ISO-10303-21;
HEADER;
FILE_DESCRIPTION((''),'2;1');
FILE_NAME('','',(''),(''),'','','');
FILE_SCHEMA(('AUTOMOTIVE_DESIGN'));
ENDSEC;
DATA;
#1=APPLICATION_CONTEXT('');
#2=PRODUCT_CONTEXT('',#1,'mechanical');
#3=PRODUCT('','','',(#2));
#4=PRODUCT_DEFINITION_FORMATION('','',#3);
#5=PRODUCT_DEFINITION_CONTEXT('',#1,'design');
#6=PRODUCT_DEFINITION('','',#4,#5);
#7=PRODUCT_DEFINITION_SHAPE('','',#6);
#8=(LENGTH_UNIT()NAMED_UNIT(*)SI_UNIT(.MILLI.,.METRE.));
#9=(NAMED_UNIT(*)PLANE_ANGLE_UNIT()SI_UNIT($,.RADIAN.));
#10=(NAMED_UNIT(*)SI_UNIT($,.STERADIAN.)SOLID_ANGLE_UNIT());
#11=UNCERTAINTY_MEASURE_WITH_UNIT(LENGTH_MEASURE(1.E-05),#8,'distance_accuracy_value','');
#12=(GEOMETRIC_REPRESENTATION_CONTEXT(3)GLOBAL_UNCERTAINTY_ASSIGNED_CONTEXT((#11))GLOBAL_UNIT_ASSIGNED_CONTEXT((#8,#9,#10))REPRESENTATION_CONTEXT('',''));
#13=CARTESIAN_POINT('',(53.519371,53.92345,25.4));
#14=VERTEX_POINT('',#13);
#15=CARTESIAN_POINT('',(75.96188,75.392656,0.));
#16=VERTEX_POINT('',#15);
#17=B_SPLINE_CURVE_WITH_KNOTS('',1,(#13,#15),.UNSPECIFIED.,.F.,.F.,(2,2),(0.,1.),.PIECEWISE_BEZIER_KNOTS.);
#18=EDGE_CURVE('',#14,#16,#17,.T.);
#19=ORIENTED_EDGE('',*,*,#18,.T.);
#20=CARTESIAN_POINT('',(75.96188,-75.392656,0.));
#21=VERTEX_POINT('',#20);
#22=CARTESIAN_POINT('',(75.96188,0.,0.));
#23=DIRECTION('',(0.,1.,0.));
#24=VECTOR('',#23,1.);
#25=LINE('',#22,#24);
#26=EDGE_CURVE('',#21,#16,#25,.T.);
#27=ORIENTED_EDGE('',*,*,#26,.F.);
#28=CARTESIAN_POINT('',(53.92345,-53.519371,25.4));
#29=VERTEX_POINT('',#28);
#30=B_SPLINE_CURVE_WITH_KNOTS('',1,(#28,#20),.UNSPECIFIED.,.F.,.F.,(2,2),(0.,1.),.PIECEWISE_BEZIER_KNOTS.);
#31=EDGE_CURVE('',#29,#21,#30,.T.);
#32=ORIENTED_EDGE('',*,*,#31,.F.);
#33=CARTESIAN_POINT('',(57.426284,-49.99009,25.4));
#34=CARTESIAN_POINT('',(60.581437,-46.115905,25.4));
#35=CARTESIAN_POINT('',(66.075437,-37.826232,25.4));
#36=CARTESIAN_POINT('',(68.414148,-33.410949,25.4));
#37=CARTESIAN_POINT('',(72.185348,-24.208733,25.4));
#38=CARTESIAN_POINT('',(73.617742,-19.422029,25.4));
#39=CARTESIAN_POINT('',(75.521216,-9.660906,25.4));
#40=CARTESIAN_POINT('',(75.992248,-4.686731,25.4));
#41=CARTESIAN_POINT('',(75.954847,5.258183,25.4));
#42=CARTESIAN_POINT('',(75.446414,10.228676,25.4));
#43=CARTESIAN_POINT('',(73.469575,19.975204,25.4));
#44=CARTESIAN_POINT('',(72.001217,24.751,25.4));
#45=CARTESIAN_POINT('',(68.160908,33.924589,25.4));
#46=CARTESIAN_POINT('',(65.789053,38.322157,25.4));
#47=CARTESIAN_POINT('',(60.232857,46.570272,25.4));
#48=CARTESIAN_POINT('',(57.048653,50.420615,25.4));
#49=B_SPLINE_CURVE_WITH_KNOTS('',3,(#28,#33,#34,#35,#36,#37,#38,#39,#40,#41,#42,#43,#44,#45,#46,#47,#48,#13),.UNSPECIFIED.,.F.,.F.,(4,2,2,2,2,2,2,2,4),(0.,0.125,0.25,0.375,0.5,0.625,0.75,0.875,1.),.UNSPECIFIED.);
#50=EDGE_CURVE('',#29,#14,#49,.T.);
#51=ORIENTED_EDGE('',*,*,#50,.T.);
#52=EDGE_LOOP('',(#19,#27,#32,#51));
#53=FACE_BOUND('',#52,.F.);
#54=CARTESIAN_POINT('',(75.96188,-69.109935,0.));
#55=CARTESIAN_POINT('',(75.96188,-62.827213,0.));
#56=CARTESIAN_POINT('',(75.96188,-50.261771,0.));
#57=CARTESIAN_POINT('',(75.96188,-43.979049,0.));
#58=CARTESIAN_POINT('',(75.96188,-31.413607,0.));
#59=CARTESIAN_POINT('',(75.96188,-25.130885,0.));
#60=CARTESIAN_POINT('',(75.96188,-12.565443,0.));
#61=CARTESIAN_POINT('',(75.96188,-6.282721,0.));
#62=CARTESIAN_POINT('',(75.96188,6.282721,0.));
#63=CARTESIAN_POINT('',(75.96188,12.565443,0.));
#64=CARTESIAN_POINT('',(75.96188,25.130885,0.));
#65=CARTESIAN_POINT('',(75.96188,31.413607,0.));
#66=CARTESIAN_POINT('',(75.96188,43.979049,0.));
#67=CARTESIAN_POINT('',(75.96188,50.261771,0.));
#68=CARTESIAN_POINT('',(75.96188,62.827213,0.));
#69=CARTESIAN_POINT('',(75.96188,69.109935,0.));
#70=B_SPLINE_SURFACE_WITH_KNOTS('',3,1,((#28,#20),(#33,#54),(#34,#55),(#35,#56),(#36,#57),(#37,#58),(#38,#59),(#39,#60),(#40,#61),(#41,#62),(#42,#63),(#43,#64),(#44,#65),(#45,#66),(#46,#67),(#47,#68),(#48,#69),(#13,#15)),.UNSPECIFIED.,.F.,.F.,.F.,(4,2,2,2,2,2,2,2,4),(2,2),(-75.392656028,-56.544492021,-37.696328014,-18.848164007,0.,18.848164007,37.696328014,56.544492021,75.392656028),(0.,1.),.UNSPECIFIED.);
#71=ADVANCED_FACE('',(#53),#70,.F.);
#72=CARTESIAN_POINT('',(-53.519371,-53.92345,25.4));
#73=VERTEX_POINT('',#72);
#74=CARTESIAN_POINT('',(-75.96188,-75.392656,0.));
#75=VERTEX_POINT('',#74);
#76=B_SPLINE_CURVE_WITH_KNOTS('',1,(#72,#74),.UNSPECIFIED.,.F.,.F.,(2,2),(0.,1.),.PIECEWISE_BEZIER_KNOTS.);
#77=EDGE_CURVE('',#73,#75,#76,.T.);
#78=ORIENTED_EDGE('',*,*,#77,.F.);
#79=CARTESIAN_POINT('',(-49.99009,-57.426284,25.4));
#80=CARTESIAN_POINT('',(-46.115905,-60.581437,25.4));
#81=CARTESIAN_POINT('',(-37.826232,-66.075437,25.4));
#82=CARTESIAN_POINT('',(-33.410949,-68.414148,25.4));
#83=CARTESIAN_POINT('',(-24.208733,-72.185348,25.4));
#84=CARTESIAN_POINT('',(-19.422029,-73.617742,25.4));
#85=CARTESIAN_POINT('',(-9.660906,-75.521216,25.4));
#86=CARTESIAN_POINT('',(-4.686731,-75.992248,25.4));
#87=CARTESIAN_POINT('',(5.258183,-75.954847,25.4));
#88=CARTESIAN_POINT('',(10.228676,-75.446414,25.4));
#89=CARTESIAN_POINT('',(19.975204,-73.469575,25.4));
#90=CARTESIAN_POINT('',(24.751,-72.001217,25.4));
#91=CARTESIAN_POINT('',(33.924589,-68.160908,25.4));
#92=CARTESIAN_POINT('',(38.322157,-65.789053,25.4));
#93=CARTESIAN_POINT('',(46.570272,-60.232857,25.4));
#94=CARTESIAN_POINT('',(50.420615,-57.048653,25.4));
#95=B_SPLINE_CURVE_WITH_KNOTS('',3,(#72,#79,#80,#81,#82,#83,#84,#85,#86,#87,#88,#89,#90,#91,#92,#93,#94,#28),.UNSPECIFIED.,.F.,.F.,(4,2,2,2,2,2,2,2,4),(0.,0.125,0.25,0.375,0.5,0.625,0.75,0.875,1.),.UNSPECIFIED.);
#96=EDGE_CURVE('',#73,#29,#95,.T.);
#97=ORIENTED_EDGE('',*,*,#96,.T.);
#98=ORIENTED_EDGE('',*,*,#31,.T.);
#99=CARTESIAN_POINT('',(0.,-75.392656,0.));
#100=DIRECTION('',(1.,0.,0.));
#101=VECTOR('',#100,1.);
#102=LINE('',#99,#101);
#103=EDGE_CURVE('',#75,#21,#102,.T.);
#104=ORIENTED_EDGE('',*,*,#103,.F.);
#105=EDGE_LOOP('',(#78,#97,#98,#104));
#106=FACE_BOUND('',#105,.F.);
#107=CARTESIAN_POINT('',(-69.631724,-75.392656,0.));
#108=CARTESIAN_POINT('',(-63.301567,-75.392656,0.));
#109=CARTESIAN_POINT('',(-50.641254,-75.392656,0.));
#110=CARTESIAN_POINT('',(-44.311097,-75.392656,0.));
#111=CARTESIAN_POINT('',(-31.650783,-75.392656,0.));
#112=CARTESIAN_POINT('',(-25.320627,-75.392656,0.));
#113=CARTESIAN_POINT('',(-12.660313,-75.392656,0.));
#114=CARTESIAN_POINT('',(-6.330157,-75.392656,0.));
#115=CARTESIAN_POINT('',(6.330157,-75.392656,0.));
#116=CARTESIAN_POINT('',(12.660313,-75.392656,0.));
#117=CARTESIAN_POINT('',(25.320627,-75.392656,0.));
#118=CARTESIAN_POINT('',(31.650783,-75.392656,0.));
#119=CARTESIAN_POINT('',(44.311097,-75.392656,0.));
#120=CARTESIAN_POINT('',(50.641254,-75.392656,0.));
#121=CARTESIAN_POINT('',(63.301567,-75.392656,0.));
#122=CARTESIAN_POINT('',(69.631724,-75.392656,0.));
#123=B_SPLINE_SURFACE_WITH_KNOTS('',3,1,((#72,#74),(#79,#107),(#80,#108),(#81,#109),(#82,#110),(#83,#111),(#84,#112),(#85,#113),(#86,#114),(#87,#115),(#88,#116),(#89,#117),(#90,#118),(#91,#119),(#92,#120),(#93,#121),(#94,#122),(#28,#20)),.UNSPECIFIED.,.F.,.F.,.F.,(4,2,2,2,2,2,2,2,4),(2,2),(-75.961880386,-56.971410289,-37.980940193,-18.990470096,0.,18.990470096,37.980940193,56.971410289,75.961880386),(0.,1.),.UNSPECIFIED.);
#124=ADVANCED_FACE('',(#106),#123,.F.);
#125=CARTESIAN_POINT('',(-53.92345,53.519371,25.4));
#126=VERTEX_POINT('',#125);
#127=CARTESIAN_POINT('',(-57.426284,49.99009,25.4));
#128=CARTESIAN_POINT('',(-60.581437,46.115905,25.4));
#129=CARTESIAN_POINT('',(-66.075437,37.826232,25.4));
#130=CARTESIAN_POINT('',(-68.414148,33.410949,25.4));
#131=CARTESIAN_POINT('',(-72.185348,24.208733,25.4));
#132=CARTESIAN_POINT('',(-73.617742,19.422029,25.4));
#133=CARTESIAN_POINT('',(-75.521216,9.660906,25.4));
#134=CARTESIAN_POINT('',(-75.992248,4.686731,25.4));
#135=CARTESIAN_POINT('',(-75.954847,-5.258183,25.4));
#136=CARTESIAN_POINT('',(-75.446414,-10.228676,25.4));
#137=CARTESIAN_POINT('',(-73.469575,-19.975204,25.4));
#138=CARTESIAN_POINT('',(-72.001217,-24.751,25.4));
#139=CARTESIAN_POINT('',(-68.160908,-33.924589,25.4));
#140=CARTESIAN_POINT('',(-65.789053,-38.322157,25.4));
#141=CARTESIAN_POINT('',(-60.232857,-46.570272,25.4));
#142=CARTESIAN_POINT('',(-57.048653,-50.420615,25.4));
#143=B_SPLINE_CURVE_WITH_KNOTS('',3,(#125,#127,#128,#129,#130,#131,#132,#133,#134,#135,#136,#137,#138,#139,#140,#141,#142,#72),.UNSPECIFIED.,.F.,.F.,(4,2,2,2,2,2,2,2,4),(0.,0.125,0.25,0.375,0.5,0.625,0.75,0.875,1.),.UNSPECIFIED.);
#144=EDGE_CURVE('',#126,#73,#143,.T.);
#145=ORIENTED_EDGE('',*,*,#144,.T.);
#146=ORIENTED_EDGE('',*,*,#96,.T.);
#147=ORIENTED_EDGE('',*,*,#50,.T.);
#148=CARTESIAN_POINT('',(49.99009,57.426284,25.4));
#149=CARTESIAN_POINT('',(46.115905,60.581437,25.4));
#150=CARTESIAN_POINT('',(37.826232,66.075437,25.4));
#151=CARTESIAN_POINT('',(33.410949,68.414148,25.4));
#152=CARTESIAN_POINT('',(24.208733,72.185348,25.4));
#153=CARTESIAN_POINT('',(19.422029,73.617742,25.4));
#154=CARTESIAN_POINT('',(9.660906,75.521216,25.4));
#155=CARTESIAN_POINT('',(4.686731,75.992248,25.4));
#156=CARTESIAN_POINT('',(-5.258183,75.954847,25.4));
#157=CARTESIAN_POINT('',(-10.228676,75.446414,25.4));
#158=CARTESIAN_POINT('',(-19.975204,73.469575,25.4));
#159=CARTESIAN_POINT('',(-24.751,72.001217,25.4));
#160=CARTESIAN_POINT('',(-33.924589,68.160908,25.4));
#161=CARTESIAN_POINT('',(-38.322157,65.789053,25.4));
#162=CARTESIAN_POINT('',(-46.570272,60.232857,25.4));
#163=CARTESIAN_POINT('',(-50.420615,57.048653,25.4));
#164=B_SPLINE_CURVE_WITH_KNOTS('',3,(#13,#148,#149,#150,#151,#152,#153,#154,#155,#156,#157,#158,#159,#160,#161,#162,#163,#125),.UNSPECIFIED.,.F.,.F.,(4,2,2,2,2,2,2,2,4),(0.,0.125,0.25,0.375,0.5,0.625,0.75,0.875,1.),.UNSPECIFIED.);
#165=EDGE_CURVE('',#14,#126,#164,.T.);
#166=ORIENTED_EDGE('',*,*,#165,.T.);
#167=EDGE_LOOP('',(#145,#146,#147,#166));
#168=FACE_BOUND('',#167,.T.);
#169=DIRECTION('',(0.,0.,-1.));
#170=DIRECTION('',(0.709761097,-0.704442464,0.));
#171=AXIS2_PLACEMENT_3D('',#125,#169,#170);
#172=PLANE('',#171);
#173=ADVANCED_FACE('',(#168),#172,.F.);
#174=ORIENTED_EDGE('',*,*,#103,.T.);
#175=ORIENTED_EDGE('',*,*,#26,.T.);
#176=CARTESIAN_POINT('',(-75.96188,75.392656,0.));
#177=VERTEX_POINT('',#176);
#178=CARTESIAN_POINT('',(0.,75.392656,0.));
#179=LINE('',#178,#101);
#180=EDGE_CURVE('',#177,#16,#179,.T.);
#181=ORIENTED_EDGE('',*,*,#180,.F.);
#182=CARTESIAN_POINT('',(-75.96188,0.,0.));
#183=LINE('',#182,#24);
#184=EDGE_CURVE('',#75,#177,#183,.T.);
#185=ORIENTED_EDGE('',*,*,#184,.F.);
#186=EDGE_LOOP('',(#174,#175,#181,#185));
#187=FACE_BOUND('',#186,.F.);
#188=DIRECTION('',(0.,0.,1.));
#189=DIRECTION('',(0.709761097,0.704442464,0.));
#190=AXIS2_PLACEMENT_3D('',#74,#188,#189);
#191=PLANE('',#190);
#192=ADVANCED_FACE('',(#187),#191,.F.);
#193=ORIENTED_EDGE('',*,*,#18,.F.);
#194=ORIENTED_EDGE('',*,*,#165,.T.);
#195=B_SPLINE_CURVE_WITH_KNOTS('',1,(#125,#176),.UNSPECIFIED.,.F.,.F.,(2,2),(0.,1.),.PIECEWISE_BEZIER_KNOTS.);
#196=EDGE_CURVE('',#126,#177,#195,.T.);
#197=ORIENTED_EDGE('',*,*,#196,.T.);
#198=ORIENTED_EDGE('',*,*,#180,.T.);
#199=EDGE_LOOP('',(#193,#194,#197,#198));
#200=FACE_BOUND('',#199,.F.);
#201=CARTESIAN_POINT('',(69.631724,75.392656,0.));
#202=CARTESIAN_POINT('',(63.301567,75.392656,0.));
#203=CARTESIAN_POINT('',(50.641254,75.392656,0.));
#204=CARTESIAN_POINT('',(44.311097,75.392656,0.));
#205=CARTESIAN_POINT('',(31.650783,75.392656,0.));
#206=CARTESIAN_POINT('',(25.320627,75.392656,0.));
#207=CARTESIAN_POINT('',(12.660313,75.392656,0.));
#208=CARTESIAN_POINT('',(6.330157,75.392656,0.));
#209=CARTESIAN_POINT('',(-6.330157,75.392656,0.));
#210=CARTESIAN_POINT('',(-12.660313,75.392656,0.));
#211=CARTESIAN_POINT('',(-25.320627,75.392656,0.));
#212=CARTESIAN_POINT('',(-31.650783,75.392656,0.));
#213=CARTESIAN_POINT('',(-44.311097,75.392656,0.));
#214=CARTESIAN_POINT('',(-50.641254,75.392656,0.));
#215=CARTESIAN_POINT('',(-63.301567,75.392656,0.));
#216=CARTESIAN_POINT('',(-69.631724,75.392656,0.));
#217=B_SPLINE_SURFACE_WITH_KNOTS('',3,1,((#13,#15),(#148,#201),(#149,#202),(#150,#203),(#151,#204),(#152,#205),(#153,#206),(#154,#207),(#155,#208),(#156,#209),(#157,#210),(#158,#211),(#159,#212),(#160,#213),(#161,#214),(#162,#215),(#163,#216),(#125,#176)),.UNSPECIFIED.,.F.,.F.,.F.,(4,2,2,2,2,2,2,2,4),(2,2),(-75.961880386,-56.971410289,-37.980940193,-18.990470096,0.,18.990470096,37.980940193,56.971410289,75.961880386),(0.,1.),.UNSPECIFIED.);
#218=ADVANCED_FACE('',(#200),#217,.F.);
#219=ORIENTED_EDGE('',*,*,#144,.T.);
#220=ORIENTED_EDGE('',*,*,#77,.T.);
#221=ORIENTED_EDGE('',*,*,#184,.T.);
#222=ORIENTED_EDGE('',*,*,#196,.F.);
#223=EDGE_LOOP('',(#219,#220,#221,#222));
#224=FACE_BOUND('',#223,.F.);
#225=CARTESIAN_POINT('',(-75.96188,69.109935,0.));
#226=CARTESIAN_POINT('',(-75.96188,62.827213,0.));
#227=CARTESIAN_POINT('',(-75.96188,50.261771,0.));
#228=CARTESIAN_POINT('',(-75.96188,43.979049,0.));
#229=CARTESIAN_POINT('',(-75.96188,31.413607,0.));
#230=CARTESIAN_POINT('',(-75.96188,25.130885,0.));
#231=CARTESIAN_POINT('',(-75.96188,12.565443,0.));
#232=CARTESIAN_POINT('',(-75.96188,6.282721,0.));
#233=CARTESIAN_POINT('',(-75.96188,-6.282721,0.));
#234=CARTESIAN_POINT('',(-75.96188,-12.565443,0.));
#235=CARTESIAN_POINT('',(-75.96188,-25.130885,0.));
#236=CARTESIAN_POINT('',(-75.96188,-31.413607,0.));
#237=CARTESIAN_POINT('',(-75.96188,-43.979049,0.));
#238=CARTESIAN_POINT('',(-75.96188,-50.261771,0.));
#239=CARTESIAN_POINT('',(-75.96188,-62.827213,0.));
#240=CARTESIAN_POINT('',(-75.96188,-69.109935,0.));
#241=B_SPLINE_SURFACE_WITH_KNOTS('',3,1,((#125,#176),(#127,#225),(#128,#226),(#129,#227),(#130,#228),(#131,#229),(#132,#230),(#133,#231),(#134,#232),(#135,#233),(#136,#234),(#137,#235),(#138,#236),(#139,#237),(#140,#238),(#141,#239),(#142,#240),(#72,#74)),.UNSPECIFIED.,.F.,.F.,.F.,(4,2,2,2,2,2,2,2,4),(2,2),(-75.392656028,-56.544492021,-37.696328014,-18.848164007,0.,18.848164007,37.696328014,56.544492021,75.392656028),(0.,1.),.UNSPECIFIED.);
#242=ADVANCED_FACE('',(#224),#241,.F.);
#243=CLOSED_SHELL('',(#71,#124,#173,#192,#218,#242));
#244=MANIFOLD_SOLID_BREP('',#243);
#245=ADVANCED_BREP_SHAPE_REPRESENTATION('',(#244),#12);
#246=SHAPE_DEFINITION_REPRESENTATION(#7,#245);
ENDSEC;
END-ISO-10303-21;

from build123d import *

# Parameters (mm, degrees)
F2_W = 151.9237607718
F2_H = 150.7853120565


# Not quite as in the source:
# - the arcs of a loft's sections are written as splines that run evenly, so that the points pair up as in the source's solid


with BuildPart() as f3:
    # F1 (on offset) → F3 section 0
    with BuildSketch(Plane.XY.offset(25.4)):
        with BuildLine():
            add(Edge.make_bspline(
                [(-53.9234495618, 53.5193713481), (-57.4262842254, 49.9900898272), (-60.5814369798, 46.1159050039), (-66.0754369985, 37.8262319869), (-68.4141484128, 33.4109487717), (-72.1853477833, 24.2087332645), (-73.6177424893, 19.4220285153), (-75.5212161348, 9.6609064991), (-75.9922480073, 4.686730595), (-75.9548465031, -5.2581834851), (-75.4464140513, -10.2286757536), (-73.4695747162, -19.9752044268), (-72.0012167141, -24.7509998294), (-68.1609083751, -33.9245894647), (-65.7890529974, -38.3221568623), (-60.2328565503, -46.5702715545), (-57.0486528689, -50.4206148982), (-53.5193713481, -53.9234495618)],
                knots=[0, 0, 0, 0, 0.125, 0.125, 0.25, 0.25, 0.375, 0.375, 0.5, 0.5, 0.625, 0.625, 0.75, 0.75, 0.875, 0.875, 1, 1, 1, 1], degree=3))
            add(Edge.make_bspline(
                [(-53.5193713481, -53.9234495618), (-49.9900898272, -57.4262842254), (-46.1159050039, -60.5814369798), (-37.8262319869, -66.0754369985), (-33.4109487717, -68.4141484128), (-24.2087332645, -72.1853477833), (-19.4220285153, -73.6177424893), (-9.6609064991, -75.5212161348), (-4.686730595, -75.9922480073), (5.2581834851, -75.9548465031), (10.2286757536, -75.4464140513), (19.9752044268, -73.4695747162), (24.7509998294, -72.0012167141), (33.9245894647, -68.1609083751), (38.3221568623, -65.7890529974), (46.5702715545, -60.2328565503), (50.4206148982, -57.0486528689), (53.9234495618, -53.5193713481)],
                knots=[0, 0, 0, 0, 0.125, 0.125, 0.25, 0.25, 0.375, 0.375, 0.5, 0.5, 0.625, 0.625, 0.75, 0.75, 0.875, 0.875, 1, 1, 1, 1], degree=3))
            add(Edge.make_bspline(
                [(53.9234495618, -53.5193713481), (57.4262842254, -49.9900898272), (60.5814369798, -46.1159050039), (66.0754369985, -37.8262319869), (68.4141484128, -33.4109487717), (72.1853477833, -24.2087332645), (73.6177424893, -19.4220285153), (75.5212161348, -9.6609064991), (75.9922480073, -4.686730595), (75.9548465031, 5.2581834851), (75.4464140513, 10.2286757536), (73.4695747162, 19.9752044268), (72.0012167141, 24.7509998294), (68.1609083751, 33.9245894647), (65.7890529974, 38.3221568623), (60.2328565503, 46.5702715545), (57.0486528689, 50.4206148982), (53.5193713481, 53.9234495618)],
                knots=[0, 0, 0, 0, 0.125, 0.125, 0.25, 0.25, 0.375, 0.375, 0.5, 0.5, 0.625, 0.625, 0.75, 0.75, 0.875, 0.875, 1, 1, 1, 1], degree=3))
            add(Edge.make_bspline(
                [(53.5193713481, 53.9234495618), (49.9900898272, 57.4262842254), (46.1159050039, 60.5814369798), (37.8262319869, 66.0754369985), (33.4109487717, 68.4141484128), (24.2087332645, 72.1853477833), (19.4220285153, 73.6177424893), (9.6609064991, 75.5212161348), (4.686730595, 75.9922480073), (-5.2581834851, 75.9548465031), (-10.2286757536, 75.4464140513), (-19.9752044268, 73.4695747162), (-24.7509998294, 72.0012167141), (-33.9245894647, 68.1609083751), (-38.3221568623, 65.7890529974), (-46.5702715545, 60.2328565503), (-50.4206148982, 57.0486528689), (-53.9234495618, 53.5193713481)],
                knots=[0, 0, 0, 0, 0.125, 0.125, 0.25, 0.25, 0.375, 0.375, 0.5, 0.5, 0.625, 0.625, 0.75, 0.75, 0.875, 0.875, 1, 1, 1, 1], degree=3))
        make_face()
    # F2 (on Top) → F3 section 1
    with BuildSketch(Plane.XY):
        Rectangle(F2_W, F2_H)
    loft(ruled=True)


solid = f3.part
